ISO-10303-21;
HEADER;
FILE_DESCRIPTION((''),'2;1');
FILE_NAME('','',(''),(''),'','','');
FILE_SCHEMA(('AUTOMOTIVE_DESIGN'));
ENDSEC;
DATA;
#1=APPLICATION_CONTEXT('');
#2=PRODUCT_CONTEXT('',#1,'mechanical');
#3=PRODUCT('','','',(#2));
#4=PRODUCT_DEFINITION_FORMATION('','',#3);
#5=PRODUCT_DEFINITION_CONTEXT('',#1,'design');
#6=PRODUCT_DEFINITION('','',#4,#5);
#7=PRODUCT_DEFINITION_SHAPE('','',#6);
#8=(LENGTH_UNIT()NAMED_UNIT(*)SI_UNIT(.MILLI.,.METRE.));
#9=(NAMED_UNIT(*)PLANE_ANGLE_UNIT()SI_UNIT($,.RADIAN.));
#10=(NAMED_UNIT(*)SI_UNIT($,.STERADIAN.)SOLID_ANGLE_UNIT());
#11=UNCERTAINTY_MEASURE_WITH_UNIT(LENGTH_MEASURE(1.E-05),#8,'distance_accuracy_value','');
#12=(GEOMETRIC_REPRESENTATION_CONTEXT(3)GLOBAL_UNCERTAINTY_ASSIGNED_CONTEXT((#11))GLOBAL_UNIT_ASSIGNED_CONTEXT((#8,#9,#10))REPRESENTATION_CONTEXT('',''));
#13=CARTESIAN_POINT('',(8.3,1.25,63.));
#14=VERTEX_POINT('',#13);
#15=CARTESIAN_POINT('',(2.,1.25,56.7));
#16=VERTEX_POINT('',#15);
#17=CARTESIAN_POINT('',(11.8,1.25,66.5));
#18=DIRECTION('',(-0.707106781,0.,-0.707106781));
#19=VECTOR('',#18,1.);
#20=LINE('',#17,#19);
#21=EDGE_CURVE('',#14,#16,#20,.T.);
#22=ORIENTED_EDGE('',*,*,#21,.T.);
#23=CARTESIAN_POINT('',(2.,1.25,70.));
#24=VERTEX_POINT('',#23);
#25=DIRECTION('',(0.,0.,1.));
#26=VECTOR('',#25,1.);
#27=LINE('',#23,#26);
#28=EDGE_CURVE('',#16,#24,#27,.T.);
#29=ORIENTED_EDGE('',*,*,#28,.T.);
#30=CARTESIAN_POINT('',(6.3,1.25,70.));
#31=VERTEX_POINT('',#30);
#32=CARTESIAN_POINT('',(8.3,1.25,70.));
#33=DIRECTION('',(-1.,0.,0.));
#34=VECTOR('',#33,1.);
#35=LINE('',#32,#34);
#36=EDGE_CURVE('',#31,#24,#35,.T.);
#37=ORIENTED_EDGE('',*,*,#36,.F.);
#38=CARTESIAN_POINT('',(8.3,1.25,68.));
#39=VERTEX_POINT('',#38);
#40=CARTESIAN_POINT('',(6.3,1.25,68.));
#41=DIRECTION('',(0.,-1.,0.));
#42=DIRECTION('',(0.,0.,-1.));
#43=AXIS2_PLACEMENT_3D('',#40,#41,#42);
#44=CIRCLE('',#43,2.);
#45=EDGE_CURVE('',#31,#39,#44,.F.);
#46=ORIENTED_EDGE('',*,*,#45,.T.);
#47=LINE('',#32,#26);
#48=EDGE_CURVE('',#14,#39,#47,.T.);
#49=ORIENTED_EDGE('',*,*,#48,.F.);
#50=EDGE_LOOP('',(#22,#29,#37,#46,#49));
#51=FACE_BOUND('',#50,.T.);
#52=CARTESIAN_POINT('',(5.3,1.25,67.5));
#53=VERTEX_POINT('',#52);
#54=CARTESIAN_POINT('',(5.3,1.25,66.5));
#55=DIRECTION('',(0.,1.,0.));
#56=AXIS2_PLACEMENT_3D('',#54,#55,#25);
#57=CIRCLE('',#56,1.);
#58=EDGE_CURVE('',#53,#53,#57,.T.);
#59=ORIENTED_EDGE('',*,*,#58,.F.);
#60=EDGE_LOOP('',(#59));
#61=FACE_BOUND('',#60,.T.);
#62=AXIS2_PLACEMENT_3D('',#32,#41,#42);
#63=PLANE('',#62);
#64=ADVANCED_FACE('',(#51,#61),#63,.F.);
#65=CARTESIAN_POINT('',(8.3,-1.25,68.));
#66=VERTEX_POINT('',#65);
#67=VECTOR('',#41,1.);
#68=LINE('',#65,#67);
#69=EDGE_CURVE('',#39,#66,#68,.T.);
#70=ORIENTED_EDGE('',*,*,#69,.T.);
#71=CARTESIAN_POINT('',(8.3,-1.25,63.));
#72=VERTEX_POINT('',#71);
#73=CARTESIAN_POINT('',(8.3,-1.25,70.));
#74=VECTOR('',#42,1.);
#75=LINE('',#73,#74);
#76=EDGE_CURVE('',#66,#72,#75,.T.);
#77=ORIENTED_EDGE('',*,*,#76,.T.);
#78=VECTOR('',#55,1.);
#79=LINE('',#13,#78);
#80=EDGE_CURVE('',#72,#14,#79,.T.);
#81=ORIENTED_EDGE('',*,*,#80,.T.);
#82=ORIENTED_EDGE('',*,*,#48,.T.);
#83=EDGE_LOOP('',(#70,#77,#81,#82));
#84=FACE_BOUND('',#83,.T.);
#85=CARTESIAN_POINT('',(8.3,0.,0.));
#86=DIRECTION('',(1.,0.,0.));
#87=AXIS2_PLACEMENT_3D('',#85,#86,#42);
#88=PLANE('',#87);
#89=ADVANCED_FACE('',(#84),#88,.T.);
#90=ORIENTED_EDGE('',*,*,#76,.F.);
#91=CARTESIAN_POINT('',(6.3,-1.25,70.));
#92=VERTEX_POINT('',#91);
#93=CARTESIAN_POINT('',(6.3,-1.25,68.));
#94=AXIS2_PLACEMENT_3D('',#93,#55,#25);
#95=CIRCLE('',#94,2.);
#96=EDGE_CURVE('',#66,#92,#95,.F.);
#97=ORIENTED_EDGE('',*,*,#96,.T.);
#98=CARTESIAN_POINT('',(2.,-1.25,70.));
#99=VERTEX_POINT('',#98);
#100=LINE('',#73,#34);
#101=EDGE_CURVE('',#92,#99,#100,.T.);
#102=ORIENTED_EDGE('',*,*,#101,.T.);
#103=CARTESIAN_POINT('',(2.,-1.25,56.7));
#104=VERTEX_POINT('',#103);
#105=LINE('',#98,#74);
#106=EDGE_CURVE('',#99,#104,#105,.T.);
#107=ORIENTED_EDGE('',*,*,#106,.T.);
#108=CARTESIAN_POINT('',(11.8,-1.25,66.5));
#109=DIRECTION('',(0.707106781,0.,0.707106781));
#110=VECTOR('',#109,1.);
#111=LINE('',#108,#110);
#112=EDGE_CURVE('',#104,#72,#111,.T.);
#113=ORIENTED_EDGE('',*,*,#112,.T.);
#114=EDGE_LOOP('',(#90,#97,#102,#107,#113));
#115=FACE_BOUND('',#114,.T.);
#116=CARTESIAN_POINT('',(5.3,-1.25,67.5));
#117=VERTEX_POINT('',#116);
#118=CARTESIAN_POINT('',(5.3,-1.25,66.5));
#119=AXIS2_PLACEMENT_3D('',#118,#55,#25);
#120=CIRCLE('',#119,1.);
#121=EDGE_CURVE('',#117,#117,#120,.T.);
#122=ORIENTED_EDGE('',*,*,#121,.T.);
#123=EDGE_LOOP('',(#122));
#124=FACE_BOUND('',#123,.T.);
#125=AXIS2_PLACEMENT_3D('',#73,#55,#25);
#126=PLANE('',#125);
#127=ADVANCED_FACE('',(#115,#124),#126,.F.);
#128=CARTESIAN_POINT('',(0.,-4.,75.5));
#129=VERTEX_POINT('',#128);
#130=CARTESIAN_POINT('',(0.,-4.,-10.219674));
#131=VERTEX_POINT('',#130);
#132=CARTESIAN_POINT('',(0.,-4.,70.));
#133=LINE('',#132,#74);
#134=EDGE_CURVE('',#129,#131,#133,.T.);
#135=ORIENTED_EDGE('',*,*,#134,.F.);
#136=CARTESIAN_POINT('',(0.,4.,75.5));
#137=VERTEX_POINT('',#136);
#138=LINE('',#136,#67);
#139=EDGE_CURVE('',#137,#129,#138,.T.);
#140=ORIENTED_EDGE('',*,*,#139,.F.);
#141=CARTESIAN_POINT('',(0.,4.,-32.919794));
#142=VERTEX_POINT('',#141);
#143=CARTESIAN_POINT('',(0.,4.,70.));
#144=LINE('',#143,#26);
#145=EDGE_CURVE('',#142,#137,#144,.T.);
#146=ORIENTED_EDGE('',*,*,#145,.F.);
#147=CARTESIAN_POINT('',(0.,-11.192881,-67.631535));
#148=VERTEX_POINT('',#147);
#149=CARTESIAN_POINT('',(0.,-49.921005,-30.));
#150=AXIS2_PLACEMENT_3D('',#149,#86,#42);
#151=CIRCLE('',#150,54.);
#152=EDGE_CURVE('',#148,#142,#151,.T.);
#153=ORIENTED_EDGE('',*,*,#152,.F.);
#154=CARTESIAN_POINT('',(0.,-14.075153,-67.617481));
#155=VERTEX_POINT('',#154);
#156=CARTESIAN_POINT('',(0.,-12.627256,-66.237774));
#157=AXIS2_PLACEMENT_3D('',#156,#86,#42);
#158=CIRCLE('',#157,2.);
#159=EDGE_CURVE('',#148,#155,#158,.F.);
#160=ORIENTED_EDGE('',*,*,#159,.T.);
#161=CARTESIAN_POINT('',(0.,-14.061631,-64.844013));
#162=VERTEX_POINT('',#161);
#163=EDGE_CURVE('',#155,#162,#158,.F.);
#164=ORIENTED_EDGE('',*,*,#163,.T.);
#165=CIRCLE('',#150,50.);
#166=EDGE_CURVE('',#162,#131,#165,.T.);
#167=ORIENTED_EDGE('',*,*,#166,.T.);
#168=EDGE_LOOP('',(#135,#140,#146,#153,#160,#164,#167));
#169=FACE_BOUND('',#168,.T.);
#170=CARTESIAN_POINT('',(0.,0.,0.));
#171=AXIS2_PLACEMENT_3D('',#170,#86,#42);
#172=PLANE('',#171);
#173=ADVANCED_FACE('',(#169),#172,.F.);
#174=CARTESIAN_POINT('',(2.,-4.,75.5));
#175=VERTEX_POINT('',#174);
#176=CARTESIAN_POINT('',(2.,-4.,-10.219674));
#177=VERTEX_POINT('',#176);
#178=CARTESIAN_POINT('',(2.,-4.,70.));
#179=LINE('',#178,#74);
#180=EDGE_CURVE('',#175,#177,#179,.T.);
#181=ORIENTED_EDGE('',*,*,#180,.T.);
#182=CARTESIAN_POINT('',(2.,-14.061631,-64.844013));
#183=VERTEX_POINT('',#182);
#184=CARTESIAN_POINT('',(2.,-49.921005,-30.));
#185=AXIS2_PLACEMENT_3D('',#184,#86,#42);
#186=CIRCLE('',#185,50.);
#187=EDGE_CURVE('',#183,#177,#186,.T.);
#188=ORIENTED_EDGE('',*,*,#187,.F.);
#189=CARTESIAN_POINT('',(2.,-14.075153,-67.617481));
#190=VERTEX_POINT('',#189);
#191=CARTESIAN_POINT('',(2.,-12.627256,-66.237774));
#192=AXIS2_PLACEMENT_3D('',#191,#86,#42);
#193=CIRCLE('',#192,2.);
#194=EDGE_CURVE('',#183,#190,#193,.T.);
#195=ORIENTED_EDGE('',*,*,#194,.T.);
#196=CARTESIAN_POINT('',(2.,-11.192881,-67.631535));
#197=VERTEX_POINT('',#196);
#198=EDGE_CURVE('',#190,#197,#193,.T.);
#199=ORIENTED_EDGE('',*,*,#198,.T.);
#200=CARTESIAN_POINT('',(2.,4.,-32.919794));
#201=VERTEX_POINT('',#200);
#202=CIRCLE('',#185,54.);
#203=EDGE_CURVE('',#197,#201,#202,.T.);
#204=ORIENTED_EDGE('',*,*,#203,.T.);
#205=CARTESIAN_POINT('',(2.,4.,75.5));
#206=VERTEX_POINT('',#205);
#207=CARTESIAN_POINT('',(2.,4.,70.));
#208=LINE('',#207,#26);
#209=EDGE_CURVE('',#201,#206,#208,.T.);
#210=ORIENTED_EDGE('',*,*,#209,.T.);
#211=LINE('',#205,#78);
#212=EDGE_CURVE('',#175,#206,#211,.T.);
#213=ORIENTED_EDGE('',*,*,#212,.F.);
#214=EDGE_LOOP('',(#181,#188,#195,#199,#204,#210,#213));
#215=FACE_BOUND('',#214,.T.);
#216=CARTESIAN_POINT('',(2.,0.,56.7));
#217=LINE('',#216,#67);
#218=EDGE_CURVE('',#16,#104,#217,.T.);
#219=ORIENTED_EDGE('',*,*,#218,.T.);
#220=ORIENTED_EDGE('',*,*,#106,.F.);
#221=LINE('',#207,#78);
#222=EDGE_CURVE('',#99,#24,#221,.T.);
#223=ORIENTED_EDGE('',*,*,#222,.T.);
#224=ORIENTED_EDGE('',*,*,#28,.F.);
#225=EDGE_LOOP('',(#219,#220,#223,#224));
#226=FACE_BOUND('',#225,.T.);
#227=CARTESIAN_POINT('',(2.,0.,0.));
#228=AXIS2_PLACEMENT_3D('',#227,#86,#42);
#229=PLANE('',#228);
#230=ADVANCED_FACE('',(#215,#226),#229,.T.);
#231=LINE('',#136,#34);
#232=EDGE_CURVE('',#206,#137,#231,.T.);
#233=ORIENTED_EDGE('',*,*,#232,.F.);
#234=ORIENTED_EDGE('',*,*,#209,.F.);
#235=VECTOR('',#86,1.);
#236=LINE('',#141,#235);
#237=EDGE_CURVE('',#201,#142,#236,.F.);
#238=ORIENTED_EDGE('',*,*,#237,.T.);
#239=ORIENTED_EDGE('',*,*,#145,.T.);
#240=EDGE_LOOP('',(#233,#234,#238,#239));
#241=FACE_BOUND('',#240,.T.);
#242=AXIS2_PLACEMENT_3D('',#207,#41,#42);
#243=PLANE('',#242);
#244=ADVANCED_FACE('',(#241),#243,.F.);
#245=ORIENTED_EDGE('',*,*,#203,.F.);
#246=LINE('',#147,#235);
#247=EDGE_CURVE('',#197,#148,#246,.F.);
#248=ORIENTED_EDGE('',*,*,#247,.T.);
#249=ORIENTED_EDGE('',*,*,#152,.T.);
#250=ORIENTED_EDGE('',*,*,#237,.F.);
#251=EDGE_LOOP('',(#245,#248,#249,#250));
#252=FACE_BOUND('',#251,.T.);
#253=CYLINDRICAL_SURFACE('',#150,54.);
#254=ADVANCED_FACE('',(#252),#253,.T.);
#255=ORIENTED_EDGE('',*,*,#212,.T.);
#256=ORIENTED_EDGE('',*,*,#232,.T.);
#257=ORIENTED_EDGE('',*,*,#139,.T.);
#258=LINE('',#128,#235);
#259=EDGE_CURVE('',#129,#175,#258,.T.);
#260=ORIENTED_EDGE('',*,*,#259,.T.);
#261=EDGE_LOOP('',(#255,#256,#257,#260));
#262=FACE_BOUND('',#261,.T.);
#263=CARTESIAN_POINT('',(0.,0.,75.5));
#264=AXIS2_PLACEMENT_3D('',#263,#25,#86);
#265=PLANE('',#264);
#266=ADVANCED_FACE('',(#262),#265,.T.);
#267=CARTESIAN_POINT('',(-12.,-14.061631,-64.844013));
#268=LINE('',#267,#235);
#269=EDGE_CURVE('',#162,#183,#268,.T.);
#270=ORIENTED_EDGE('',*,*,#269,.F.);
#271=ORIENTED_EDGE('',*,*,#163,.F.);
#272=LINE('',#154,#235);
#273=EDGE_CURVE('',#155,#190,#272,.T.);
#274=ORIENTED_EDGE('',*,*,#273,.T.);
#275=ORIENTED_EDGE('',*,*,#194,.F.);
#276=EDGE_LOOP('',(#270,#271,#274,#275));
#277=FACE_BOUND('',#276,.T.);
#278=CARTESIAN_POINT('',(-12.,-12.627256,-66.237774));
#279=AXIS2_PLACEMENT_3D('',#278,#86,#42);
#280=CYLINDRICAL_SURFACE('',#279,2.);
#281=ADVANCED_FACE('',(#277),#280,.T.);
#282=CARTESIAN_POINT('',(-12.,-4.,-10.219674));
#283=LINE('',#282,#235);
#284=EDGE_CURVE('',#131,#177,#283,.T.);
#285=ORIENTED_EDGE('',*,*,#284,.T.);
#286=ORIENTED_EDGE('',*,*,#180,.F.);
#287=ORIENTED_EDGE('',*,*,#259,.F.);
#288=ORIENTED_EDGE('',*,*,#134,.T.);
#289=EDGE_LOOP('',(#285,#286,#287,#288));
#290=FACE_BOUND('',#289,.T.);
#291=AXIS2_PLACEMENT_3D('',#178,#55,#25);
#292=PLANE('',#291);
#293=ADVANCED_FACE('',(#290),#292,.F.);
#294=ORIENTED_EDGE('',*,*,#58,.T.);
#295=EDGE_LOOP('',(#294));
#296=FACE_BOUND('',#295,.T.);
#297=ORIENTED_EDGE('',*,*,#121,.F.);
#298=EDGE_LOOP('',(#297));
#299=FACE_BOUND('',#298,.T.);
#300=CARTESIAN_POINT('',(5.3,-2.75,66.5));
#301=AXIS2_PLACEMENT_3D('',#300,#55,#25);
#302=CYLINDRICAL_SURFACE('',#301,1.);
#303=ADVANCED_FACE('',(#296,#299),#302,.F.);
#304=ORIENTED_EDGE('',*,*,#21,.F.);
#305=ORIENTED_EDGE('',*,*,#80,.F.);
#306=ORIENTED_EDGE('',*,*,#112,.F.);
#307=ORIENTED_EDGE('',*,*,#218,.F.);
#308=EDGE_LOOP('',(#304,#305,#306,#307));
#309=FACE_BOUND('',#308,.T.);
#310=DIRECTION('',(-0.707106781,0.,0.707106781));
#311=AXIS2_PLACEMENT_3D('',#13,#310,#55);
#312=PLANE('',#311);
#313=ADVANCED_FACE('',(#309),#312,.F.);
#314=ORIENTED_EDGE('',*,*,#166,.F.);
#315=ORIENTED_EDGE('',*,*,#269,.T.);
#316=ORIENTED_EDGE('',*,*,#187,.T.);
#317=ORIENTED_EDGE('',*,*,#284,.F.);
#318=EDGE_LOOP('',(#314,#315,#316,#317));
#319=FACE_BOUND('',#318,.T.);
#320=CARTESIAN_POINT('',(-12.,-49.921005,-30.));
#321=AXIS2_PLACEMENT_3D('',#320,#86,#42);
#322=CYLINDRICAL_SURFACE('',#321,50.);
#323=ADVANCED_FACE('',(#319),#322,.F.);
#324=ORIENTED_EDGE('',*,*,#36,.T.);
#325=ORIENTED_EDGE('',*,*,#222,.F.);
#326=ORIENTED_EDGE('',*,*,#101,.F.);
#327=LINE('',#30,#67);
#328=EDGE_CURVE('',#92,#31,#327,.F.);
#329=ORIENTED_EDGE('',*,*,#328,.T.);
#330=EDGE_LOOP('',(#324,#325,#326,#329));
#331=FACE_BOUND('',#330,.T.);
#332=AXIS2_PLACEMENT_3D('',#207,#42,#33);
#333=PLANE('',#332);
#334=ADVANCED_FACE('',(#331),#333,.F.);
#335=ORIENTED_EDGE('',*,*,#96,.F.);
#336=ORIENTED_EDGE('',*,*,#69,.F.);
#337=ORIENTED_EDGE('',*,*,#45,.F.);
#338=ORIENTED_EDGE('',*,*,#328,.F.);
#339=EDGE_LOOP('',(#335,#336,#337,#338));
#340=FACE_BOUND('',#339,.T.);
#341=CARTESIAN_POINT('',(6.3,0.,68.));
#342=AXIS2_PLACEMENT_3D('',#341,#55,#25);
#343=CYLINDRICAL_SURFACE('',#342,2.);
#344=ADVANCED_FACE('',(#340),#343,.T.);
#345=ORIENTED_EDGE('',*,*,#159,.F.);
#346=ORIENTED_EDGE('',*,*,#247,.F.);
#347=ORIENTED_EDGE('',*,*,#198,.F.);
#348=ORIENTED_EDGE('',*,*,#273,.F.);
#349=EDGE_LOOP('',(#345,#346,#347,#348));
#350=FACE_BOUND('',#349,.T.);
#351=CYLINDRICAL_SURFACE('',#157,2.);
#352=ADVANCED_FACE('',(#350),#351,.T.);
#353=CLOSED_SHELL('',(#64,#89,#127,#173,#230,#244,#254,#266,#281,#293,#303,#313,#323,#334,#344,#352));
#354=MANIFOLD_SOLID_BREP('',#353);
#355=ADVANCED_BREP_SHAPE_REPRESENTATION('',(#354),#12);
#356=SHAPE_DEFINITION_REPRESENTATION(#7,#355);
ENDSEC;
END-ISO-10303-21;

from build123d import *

# Parameters (mm, degrees)
SKETCH1_W           = 140
SKETCH1_H           = 8
BOSS_EXTRUDE1_DEPTH = 2
SKETCH3_W           = 7
SKETCH3_H           = 2.5
BOSS_EXTRUDE2_DEPTH = 6.3
SKETCH4_R           = 1
CUT_EXTRUDE1_DEPTH  = 4
SKETCH6_R           = 50
CUT_EXTRUDE3_DEPTH  = 14
BOSS_EXTRUDE4_DEPTH = 2
CUT_EXTRUDE5_DEPTH  = 2
FILLET6_R           = 2
FILLET7_R           = 2
SKETCH11_W          = 2
SKETCH11_H          = 8
BOSS_EXTRUDE5_DEPTH = 5.5
CHAMFER1_SIZE       = 6.3


with BuildPart() as part:
    # Sketch1 → Boss-Extrude1 (new body)
    with BuildSketch(Plane(origin=(0, 0, 0), x_dir=(0, 0, -1), z_dir=(1, 0, 0))):
        Rectangle(SKETCH1_W, SKETCH1_H)
    extrude(amount=BOSS_EXTRUDE1_DEPTH)

    # Sketch3 → Boss-Extrude2 (add)
    with BuildSketch(Plane(origin=(2, 0, 0), x_dir=(0, 0, -1), z_dir=(1, 0, 0))):
        with Locations((-66.5, 0)):
            Rectangle(SKETCH3_W, SKETCH3_H)
    extrude(amount=BOSS_EXTRUDE2_DEPTH)

    # Sketch4 → Cut-Extrude1 (cut)
    with BuildSketch(Plane(origin=(0, 1.25, 0), x_dir=(1, 0, 0), z_dir=(0, 1, 0))):
        with Locations(Location((5.3, -66.5, 0), (0, 0, 270))):
            Circle(SKETCH4_R)
    extrude(amount=-CUT_EXTRUDE1_DEPTH, mode=Mode.SUBTRACT)

    # Sketch6 → Cut-Extrude3 (cut)
    with BuildSketch(Plane(origin=(2, 0, 0), x_dir=(0, 0, -1), z_dir=(1, 0, 0))):
        with Locations((30, -49.921005204)):
            Circle(SKETCH6_R)
    extrude(amount=-CUT_EXTRUDE3_DEPTH, mode=Mode.SUBTRACT)

    # Sketch9 → Boss-Extrude4 (add)
    with BuildSketch(Plane(origin=(2, 0, 0), x_dir=(0, 0, -1), z_dir=(1, 0, 0))):
        with BuildLine():
            Line((69.093233498, -12.668903321), (66.197438424, -15.428318275))
            ThreePointArc((66.197438424, -15.428318275), (58.566223606, -8.884791089), (49.780325606, -4))
            Line((49.780325606, -4), (58.412343815, -4))
            ThreePointArc((58.412343815, -4), (64.029960524, -7.992950315), (69.093233498, -12.668903321))
        make_face()
    extrude(amount=-BOSS_EXTRUDE4_DEPTH)

    # Sketch10 → Cut-Extrude5 (cut)
    with BuildSketch(Plane(origin=(2, 0, 0), x_dir=(0, 0, -1), z_dir=(1, 0, 0))):
        with BuildLine():
            Line((30, 4.078994796), (98.693138082, 13.357457715))
            Line((98.693138082, 13.357457715), (83.74319787, -55.181108121))
            ThreePointArc((83.74319787, -55.181108121), (70.000284733, -13.644604869), (30, 4.078994796))
        make_face()
    extrude(amount=-CUT_EXTRUDE5_DEPTH, mode=Mode.SUBTRACT)

    # Fillet6
    fillet6_edges = [part.edges().sort_by_distance(p)[0] for p in [
        (1, -15.428318275, -66.197438424),
        (1, -12.668903321, -69.093233498),
    ]]
    fillet(fillet6_edges, radius=FILLET6_R - 0.0001)  # a hair under: the kernel refuses the full size

    # Fillet7
    fillet7_edges = [part.edges().sort_by_distance(p)[0] for p in [
        (8.3, 0, 70),
    ]]
    fillet(fillet7_edges, radius=FILLET7_R)

    # Sketch11 → Boss-Extrude5 (add)
    with BuildSketch(Plane.XY.offset(70)):
        with Locations((1, 0)):
            Rectangle(SKETCH11_W, SKETCH11_H)
    extrude(amount=BOSS_EXTRUDE5_DEPTH)

    # Chamfer1
    chamfer1_edges = [part.edges().sort_by_distance(p)[0] for p in [
        (2, 0, 63),
    ]]
    chamfer(chamfer1_edges, length=CHAMFER1_SIZE - 0.0001)  # a hair under: the kernel refuses the full size


solid = part.part
